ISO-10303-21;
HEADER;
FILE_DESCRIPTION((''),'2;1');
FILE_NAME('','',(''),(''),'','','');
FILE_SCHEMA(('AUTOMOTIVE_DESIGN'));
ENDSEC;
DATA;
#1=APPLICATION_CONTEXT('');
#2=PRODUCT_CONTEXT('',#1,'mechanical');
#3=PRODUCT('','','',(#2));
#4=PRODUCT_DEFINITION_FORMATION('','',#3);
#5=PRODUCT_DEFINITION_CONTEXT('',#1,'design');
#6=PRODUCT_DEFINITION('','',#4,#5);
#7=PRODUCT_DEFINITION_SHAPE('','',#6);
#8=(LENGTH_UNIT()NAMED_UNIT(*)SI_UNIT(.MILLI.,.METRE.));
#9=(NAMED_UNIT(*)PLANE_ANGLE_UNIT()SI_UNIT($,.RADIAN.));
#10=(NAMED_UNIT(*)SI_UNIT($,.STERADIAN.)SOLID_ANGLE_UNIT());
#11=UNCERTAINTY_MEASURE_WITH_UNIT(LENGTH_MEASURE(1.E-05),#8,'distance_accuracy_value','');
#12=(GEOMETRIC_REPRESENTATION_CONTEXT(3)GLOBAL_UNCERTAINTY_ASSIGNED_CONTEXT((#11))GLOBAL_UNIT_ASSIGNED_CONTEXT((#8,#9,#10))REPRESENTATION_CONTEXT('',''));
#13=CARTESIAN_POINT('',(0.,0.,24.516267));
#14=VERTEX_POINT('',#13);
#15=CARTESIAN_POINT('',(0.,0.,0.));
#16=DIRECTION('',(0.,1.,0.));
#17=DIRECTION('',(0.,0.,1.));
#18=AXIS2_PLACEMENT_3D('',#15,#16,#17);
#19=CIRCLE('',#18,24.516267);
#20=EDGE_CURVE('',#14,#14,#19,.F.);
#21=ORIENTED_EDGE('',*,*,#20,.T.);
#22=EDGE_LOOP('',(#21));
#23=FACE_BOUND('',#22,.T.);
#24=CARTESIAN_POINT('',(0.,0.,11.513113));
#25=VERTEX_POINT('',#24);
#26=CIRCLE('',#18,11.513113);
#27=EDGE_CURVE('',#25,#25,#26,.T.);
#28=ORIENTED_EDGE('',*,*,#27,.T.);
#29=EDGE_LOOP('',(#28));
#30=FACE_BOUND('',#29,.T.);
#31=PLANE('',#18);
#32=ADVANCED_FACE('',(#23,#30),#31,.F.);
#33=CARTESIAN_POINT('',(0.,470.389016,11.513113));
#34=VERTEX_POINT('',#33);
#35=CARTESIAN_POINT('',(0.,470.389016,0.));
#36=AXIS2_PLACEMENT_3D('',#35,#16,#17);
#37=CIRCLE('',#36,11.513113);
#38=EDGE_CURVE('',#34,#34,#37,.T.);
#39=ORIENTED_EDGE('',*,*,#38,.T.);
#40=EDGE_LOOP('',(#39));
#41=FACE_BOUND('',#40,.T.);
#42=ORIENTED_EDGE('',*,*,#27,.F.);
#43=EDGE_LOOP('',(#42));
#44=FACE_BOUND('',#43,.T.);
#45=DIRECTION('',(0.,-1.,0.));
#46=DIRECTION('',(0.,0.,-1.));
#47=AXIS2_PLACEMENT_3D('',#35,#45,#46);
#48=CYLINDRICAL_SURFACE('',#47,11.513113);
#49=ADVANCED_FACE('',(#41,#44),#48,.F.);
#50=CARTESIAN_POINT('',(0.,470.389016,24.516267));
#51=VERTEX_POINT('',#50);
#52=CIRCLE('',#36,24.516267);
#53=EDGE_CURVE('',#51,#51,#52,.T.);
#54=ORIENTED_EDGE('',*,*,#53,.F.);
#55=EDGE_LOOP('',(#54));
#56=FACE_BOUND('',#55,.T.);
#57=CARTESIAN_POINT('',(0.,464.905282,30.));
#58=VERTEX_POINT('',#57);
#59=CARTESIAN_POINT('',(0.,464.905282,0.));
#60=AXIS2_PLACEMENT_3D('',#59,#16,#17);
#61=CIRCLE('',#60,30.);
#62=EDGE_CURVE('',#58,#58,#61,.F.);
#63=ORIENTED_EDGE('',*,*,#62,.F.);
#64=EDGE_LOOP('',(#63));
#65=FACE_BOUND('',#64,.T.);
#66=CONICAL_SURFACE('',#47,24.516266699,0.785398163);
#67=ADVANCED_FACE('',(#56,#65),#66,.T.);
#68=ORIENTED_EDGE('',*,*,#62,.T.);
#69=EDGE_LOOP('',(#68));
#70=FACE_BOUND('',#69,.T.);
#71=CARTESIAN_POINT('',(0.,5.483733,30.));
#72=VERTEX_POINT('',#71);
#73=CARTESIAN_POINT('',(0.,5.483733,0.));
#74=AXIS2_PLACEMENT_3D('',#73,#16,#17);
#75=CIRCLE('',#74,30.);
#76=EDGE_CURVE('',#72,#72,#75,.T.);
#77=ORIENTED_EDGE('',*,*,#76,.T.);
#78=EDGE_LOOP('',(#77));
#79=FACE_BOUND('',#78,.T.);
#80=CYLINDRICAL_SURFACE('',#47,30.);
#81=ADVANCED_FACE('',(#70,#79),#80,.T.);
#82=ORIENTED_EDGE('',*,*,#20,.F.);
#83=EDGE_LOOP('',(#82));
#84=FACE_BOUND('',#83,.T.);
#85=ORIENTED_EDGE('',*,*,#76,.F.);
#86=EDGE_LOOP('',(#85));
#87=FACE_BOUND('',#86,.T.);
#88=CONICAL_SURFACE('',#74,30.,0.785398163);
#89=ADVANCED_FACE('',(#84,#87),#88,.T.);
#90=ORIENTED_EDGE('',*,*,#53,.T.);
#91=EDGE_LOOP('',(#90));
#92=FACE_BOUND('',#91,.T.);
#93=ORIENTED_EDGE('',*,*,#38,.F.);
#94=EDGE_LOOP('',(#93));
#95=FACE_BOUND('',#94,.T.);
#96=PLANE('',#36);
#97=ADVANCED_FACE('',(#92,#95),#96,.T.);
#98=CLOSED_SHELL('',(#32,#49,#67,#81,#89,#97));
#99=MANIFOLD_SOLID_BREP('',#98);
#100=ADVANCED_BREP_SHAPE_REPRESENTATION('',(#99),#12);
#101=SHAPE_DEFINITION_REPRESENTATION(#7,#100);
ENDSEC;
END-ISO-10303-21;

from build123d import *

# Parameters (mm, degrees)
SKETCH1_R           = 30
BOSS_EXTRUDE1_DEPTH = 470.389015523
SKETCH2_R           = 11.513113185
CUT_EXTRUDE1_DEPTH  = 473.298450056
CHAMFER1_SIZE       = 5.483733301


with BuildPart() as part:
    # Sketch1 → Boss-Extrude1 (new body)
    with BuildSketch(Plane(origin=(0, 0, 0), x_dir=(1, 0, 0), z_dir=(0, 1, 0))):
        Circle(SKETCH1_R)
    extrude(amount=BOSS_EXTRUDE1_DEPTH)

    # Sketch2 → Cut-Extrude1 (cut, through all)
    with BuildSketch(Plane(origin=(0, 0, 0), x_dir=(1, 0, 0), z_dir=(0, 1, 0))):
        Circle(SKETCH2_R)
    extrude(amount=CUT_EXTRUDE1_DEPTH, mode=Mode.SUBTRACT)

    # Chamfer1
    chamfer1_edges = [part.edges().sort_by_distance(p)[0] for p in [
        (-30, 470.389015523, 0),
        (-30, 0, 0),
    ]]
    chamfer(chamfer1_edges, length=CHAMFER1_SIZE)


solid = part.part
